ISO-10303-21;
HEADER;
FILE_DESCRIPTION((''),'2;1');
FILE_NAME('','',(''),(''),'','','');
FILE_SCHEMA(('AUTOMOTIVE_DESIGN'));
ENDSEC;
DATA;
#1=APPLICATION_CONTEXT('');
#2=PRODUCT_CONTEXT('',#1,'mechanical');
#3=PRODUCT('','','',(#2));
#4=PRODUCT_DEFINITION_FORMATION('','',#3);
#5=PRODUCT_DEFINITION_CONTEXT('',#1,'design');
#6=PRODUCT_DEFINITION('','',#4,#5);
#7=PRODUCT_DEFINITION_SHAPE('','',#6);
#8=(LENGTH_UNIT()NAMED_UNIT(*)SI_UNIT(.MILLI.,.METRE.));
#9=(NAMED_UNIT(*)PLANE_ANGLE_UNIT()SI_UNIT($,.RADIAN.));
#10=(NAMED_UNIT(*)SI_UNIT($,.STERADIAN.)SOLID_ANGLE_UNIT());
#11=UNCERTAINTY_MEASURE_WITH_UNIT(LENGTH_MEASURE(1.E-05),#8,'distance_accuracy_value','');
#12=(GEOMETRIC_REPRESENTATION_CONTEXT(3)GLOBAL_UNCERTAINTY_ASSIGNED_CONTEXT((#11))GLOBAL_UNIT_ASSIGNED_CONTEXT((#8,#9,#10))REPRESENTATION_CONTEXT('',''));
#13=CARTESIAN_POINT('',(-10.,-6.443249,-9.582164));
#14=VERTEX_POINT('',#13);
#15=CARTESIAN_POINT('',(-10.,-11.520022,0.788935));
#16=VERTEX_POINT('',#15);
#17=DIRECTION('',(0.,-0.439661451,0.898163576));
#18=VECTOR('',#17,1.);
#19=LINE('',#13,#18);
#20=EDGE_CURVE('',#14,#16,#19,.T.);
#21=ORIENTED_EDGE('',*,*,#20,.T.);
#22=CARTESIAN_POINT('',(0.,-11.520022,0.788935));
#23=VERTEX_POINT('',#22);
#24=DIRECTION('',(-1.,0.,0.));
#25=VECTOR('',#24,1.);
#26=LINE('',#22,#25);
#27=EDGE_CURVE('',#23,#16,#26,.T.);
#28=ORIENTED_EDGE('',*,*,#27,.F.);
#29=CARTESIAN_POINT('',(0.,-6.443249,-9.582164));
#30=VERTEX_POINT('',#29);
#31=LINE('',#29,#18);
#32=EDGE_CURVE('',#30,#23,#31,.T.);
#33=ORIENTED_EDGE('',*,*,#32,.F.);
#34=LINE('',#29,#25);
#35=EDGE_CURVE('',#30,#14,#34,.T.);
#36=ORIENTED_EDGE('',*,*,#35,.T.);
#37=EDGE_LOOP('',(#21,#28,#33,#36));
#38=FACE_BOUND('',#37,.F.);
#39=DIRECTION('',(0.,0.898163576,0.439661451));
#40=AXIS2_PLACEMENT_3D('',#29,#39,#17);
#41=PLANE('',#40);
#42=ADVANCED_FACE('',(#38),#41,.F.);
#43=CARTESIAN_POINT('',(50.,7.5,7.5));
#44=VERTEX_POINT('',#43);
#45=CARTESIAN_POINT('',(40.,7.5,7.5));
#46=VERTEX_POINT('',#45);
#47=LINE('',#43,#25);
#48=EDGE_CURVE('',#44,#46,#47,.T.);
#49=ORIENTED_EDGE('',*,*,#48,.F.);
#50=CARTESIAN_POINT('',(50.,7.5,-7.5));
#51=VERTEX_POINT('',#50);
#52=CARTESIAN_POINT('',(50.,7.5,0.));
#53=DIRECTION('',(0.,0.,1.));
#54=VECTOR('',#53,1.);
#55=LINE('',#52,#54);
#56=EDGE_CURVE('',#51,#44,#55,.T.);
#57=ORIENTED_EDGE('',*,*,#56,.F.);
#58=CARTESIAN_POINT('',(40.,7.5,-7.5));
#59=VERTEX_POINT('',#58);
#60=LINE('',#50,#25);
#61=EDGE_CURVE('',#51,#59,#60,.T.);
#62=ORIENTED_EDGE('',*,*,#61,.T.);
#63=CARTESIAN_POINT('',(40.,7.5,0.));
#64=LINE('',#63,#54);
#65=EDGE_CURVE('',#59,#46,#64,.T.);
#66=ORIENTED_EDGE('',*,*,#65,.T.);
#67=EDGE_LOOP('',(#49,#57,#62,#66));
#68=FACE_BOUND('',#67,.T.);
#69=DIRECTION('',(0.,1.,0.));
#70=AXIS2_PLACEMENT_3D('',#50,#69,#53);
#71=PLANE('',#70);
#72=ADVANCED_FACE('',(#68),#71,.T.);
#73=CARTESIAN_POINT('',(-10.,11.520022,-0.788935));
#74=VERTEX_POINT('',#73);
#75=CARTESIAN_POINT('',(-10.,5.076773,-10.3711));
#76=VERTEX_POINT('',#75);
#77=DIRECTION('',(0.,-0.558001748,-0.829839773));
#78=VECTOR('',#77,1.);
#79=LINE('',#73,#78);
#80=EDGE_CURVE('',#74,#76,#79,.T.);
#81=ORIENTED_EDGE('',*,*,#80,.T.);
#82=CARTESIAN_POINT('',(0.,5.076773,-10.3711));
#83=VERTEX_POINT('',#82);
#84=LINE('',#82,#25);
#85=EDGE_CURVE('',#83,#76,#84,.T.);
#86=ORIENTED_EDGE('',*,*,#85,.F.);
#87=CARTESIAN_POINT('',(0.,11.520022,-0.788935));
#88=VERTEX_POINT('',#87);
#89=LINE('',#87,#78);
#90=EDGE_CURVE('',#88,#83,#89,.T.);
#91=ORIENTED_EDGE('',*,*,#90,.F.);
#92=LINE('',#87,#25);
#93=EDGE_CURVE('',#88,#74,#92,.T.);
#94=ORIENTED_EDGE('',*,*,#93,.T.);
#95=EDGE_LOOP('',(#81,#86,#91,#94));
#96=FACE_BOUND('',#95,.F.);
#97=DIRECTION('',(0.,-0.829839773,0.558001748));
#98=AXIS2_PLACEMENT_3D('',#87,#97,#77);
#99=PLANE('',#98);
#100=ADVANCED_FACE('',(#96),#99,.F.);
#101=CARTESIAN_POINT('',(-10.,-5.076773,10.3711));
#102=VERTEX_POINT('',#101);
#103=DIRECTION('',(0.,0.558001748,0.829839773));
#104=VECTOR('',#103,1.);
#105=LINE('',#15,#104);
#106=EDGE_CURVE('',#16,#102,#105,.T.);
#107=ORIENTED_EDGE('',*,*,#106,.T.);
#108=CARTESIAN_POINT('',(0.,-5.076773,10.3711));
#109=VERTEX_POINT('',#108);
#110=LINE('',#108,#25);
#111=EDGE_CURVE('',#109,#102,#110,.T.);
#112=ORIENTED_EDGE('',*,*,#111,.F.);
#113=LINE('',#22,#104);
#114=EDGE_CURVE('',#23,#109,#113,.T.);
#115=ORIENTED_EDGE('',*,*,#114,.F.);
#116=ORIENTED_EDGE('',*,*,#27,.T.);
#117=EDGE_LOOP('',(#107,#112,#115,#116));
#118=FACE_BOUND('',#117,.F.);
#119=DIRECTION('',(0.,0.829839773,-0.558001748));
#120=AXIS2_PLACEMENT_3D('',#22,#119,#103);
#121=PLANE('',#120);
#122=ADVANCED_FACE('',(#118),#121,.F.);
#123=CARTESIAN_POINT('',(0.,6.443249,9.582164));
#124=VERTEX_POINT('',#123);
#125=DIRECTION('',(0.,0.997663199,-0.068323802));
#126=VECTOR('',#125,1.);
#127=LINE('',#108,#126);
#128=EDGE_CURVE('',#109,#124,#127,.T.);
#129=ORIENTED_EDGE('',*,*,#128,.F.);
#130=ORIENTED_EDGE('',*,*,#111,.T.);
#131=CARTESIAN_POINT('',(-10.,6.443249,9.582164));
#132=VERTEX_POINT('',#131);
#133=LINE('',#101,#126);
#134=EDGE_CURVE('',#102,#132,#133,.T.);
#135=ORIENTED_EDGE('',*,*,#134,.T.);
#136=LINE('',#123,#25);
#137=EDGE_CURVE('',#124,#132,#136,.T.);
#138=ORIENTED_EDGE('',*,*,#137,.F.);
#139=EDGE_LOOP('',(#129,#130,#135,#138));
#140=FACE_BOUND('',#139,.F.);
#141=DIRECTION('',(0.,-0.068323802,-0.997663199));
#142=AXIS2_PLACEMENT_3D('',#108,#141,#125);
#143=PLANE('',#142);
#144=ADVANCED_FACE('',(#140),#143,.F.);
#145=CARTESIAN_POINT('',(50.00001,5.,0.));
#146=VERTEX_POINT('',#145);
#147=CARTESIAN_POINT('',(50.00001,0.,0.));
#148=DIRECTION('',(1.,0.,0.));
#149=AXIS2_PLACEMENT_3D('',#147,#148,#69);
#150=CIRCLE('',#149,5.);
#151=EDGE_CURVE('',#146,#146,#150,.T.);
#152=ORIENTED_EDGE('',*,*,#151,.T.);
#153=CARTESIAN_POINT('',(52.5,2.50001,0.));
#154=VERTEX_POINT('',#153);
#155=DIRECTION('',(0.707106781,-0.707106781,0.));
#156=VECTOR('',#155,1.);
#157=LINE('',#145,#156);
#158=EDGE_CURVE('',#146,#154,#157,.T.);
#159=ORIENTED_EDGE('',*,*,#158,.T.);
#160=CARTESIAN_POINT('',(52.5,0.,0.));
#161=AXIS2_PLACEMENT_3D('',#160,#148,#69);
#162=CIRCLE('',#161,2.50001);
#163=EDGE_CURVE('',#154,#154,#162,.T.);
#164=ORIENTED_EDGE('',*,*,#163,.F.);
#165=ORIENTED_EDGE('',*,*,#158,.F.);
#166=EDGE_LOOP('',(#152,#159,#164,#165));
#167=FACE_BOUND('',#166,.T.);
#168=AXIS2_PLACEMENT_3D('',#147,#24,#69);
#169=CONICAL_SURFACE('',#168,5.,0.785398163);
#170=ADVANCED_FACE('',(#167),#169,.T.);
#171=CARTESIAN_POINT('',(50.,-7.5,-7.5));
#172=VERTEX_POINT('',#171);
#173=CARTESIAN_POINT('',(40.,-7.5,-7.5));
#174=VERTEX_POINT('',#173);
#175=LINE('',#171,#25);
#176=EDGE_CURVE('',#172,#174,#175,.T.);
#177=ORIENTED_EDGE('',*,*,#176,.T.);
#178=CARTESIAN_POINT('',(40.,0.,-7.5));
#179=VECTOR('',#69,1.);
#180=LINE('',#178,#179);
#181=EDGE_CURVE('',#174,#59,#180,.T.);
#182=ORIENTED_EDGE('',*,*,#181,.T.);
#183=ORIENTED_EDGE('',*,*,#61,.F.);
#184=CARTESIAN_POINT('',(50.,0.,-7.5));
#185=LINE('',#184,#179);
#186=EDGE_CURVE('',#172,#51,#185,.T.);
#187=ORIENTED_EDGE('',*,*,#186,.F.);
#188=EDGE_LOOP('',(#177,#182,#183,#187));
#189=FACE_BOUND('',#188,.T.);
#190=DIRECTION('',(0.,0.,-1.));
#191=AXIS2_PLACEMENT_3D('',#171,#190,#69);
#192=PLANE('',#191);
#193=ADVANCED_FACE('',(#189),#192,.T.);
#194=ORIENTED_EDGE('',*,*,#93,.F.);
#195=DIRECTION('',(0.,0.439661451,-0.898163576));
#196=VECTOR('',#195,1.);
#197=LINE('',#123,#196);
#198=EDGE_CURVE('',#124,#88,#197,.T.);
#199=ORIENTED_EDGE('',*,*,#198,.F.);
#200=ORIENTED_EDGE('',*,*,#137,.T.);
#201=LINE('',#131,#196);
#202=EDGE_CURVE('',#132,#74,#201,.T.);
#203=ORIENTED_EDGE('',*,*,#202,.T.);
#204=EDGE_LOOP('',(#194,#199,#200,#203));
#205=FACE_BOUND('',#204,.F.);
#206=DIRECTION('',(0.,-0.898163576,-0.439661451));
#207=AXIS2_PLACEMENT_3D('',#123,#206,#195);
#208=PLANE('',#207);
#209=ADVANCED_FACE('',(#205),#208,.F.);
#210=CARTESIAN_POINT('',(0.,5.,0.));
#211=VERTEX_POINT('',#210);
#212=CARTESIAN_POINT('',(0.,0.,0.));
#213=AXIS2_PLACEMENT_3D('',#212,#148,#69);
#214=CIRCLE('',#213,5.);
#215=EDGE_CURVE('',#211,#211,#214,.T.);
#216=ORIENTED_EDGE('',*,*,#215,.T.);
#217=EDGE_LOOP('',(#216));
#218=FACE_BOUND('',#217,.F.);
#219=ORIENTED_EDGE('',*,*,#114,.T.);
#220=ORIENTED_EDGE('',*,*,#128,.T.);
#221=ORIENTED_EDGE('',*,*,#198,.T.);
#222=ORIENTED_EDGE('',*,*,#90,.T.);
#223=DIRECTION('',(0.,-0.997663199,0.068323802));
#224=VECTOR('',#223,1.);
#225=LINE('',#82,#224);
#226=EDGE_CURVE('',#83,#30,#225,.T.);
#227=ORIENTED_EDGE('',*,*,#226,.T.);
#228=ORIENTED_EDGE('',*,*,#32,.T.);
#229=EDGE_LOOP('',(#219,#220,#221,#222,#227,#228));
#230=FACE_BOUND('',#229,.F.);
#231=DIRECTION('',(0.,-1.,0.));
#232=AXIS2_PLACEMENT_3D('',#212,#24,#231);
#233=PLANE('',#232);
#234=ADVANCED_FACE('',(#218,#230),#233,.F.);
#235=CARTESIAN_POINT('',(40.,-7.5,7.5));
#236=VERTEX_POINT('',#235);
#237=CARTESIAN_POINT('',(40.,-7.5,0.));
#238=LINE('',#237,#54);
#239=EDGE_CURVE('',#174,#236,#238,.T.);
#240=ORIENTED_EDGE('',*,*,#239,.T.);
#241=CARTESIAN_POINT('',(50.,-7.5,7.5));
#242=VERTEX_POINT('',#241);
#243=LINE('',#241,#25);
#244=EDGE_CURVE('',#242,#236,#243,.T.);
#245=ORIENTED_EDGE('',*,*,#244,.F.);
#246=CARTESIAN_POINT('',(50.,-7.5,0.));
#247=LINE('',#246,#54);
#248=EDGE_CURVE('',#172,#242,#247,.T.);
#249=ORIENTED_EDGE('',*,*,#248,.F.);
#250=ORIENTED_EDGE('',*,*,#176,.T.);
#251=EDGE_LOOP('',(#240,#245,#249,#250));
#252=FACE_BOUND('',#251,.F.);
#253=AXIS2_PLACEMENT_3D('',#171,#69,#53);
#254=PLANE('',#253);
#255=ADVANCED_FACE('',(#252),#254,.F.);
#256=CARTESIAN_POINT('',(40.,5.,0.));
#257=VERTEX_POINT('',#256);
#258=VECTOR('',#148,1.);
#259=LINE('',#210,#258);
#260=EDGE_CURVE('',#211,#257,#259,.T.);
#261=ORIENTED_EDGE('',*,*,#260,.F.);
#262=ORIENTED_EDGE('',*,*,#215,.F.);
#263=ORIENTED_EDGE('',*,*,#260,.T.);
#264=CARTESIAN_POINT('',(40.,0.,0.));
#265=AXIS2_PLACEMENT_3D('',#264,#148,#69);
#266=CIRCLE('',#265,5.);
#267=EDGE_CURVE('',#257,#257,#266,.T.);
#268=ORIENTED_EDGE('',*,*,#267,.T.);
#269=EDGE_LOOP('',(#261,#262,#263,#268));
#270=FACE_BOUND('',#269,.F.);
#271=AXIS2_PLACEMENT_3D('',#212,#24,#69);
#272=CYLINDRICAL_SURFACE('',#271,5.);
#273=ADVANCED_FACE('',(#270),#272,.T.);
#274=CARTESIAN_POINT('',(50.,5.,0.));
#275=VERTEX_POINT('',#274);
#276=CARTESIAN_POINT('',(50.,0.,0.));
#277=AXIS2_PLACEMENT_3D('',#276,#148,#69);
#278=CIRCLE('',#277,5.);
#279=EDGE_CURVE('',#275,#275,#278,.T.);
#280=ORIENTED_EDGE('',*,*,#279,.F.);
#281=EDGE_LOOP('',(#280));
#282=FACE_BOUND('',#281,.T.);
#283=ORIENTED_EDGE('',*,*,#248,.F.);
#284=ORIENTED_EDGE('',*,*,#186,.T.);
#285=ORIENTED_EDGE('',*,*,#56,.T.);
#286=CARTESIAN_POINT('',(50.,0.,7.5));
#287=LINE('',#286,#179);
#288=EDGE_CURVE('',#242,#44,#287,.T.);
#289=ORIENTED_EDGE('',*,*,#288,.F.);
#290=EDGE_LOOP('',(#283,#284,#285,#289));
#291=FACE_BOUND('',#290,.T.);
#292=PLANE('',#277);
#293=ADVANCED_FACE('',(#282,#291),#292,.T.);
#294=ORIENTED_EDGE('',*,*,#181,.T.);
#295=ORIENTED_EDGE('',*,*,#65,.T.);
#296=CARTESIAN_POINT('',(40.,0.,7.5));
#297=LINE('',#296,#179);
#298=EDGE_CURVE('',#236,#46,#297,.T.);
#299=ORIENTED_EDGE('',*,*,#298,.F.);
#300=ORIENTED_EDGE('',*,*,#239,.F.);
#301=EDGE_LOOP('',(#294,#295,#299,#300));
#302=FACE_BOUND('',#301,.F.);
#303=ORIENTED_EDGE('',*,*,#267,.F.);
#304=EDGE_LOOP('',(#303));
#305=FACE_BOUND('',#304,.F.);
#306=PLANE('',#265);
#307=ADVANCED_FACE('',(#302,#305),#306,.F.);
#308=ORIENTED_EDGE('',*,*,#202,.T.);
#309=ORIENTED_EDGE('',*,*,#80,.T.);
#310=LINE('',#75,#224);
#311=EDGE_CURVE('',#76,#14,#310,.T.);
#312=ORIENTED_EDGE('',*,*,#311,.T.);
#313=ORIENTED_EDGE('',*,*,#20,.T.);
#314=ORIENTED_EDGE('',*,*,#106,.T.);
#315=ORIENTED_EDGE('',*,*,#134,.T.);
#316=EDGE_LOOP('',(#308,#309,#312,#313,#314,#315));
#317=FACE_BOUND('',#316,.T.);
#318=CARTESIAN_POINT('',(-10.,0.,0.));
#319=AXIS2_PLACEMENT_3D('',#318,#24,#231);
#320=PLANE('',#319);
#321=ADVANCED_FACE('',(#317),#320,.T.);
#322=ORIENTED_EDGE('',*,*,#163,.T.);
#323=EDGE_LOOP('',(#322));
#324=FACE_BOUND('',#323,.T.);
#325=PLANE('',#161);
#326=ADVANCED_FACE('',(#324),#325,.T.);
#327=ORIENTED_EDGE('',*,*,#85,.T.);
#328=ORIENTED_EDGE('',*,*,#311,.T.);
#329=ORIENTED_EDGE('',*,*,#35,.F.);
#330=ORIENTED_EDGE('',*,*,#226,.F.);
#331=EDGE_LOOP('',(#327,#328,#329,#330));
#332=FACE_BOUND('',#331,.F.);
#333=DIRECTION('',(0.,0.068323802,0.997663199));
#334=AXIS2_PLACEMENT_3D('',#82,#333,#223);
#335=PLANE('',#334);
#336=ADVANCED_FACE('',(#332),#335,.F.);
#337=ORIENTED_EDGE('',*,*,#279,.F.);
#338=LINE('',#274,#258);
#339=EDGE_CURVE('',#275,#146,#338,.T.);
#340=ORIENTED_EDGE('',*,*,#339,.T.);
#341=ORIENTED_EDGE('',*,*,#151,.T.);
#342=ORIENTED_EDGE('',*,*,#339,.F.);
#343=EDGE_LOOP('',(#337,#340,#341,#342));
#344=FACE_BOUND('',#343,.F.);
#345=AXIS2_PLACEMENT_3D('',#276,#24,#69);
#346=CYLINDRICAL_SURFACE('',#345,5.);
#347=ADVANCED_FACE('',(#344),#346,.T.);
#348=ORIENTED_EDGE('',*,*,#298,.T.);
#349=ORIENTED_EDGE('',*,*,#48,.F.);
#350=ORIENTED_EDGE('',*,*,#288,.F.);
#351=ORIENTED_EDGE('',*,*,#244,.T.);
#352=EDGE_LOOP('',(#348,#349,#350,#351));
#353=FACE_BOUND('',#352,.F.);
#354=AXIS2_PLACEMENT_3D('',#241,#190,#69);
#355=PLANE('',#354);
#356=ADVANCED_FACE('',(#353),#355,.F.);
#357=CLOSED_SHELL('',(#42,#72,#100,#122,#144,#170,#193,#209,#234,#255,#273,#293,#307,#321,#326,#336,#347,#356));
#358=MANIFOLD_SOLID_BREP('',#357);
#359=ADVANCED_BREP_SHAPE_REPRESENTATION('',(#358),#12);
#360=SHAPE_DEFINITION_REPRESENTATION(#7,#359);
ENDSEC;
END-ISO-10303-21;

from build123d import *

# Parameters (mm, degrees)
F0_R     = 5
F1_DEPTH = 50
F3_DEPTH = 10
F4_W     = 15
F4_H     = 15
F4_R     = 5
F5_DEPTH = 10
F6_R     = 5
F7_DEPTH = 2.5
F8_SIZE  = 2.49999


# Not quite as in the source:
# - a fillet or chamfer is up to 0.001 mm smaller than in the source, because OpenCascade refuses the exact size


with BuildPart() as f1:
    # F0 (on Right) → F1 (new body)
    with BuildSketch(Plane.YZ):
        Circle(F0_R)
    extrude(amount=F1_DEPTH)

    # F2 (on face) → F3 (join)
    with BuildSketch(Plane(origin=(0, 0, 0), x_dir=(0, -1, 0), z_dir=(-1, 0, 0))):
        Polygon((11.5200223266, 0.788935313), (5.0767731403, 10.3710996435), (-6.4432491863, 9.5821643305), (-11.5200223266, -0.788935313), (-5.0767731403, -10.3710996435), (6.4432491863, -9.5821643305), align=None)
    extrude(amount=F3_DEPTH)

    # F4 (on face) → F5 (join)
    with BuildSketch(Plane.YZ.offset(50)):
        Rectangle(F4_W, F4_H)
        Circle(F4_R, mode=Mode.SUBTRACT)
    extrude(amount=-F5_DEPTH)

    # F6 (on face) → F7 (join)
    with BuildSketch(Plane.YZ.offset(50)):
        Circle(F6_R)
    extrude(amount=F7_DEPTH)

    # F8 (size 2.5 in the source; OpenCascade refuses exactly that, so slightly less here)
    f8_edges = [f1.edges().sort_by_distance(p)[0] for p in [
        (52.5, -5, 0),
    ]]
    chamfer(f8_edges, length=F8_SIZE)


solid = f1.part
